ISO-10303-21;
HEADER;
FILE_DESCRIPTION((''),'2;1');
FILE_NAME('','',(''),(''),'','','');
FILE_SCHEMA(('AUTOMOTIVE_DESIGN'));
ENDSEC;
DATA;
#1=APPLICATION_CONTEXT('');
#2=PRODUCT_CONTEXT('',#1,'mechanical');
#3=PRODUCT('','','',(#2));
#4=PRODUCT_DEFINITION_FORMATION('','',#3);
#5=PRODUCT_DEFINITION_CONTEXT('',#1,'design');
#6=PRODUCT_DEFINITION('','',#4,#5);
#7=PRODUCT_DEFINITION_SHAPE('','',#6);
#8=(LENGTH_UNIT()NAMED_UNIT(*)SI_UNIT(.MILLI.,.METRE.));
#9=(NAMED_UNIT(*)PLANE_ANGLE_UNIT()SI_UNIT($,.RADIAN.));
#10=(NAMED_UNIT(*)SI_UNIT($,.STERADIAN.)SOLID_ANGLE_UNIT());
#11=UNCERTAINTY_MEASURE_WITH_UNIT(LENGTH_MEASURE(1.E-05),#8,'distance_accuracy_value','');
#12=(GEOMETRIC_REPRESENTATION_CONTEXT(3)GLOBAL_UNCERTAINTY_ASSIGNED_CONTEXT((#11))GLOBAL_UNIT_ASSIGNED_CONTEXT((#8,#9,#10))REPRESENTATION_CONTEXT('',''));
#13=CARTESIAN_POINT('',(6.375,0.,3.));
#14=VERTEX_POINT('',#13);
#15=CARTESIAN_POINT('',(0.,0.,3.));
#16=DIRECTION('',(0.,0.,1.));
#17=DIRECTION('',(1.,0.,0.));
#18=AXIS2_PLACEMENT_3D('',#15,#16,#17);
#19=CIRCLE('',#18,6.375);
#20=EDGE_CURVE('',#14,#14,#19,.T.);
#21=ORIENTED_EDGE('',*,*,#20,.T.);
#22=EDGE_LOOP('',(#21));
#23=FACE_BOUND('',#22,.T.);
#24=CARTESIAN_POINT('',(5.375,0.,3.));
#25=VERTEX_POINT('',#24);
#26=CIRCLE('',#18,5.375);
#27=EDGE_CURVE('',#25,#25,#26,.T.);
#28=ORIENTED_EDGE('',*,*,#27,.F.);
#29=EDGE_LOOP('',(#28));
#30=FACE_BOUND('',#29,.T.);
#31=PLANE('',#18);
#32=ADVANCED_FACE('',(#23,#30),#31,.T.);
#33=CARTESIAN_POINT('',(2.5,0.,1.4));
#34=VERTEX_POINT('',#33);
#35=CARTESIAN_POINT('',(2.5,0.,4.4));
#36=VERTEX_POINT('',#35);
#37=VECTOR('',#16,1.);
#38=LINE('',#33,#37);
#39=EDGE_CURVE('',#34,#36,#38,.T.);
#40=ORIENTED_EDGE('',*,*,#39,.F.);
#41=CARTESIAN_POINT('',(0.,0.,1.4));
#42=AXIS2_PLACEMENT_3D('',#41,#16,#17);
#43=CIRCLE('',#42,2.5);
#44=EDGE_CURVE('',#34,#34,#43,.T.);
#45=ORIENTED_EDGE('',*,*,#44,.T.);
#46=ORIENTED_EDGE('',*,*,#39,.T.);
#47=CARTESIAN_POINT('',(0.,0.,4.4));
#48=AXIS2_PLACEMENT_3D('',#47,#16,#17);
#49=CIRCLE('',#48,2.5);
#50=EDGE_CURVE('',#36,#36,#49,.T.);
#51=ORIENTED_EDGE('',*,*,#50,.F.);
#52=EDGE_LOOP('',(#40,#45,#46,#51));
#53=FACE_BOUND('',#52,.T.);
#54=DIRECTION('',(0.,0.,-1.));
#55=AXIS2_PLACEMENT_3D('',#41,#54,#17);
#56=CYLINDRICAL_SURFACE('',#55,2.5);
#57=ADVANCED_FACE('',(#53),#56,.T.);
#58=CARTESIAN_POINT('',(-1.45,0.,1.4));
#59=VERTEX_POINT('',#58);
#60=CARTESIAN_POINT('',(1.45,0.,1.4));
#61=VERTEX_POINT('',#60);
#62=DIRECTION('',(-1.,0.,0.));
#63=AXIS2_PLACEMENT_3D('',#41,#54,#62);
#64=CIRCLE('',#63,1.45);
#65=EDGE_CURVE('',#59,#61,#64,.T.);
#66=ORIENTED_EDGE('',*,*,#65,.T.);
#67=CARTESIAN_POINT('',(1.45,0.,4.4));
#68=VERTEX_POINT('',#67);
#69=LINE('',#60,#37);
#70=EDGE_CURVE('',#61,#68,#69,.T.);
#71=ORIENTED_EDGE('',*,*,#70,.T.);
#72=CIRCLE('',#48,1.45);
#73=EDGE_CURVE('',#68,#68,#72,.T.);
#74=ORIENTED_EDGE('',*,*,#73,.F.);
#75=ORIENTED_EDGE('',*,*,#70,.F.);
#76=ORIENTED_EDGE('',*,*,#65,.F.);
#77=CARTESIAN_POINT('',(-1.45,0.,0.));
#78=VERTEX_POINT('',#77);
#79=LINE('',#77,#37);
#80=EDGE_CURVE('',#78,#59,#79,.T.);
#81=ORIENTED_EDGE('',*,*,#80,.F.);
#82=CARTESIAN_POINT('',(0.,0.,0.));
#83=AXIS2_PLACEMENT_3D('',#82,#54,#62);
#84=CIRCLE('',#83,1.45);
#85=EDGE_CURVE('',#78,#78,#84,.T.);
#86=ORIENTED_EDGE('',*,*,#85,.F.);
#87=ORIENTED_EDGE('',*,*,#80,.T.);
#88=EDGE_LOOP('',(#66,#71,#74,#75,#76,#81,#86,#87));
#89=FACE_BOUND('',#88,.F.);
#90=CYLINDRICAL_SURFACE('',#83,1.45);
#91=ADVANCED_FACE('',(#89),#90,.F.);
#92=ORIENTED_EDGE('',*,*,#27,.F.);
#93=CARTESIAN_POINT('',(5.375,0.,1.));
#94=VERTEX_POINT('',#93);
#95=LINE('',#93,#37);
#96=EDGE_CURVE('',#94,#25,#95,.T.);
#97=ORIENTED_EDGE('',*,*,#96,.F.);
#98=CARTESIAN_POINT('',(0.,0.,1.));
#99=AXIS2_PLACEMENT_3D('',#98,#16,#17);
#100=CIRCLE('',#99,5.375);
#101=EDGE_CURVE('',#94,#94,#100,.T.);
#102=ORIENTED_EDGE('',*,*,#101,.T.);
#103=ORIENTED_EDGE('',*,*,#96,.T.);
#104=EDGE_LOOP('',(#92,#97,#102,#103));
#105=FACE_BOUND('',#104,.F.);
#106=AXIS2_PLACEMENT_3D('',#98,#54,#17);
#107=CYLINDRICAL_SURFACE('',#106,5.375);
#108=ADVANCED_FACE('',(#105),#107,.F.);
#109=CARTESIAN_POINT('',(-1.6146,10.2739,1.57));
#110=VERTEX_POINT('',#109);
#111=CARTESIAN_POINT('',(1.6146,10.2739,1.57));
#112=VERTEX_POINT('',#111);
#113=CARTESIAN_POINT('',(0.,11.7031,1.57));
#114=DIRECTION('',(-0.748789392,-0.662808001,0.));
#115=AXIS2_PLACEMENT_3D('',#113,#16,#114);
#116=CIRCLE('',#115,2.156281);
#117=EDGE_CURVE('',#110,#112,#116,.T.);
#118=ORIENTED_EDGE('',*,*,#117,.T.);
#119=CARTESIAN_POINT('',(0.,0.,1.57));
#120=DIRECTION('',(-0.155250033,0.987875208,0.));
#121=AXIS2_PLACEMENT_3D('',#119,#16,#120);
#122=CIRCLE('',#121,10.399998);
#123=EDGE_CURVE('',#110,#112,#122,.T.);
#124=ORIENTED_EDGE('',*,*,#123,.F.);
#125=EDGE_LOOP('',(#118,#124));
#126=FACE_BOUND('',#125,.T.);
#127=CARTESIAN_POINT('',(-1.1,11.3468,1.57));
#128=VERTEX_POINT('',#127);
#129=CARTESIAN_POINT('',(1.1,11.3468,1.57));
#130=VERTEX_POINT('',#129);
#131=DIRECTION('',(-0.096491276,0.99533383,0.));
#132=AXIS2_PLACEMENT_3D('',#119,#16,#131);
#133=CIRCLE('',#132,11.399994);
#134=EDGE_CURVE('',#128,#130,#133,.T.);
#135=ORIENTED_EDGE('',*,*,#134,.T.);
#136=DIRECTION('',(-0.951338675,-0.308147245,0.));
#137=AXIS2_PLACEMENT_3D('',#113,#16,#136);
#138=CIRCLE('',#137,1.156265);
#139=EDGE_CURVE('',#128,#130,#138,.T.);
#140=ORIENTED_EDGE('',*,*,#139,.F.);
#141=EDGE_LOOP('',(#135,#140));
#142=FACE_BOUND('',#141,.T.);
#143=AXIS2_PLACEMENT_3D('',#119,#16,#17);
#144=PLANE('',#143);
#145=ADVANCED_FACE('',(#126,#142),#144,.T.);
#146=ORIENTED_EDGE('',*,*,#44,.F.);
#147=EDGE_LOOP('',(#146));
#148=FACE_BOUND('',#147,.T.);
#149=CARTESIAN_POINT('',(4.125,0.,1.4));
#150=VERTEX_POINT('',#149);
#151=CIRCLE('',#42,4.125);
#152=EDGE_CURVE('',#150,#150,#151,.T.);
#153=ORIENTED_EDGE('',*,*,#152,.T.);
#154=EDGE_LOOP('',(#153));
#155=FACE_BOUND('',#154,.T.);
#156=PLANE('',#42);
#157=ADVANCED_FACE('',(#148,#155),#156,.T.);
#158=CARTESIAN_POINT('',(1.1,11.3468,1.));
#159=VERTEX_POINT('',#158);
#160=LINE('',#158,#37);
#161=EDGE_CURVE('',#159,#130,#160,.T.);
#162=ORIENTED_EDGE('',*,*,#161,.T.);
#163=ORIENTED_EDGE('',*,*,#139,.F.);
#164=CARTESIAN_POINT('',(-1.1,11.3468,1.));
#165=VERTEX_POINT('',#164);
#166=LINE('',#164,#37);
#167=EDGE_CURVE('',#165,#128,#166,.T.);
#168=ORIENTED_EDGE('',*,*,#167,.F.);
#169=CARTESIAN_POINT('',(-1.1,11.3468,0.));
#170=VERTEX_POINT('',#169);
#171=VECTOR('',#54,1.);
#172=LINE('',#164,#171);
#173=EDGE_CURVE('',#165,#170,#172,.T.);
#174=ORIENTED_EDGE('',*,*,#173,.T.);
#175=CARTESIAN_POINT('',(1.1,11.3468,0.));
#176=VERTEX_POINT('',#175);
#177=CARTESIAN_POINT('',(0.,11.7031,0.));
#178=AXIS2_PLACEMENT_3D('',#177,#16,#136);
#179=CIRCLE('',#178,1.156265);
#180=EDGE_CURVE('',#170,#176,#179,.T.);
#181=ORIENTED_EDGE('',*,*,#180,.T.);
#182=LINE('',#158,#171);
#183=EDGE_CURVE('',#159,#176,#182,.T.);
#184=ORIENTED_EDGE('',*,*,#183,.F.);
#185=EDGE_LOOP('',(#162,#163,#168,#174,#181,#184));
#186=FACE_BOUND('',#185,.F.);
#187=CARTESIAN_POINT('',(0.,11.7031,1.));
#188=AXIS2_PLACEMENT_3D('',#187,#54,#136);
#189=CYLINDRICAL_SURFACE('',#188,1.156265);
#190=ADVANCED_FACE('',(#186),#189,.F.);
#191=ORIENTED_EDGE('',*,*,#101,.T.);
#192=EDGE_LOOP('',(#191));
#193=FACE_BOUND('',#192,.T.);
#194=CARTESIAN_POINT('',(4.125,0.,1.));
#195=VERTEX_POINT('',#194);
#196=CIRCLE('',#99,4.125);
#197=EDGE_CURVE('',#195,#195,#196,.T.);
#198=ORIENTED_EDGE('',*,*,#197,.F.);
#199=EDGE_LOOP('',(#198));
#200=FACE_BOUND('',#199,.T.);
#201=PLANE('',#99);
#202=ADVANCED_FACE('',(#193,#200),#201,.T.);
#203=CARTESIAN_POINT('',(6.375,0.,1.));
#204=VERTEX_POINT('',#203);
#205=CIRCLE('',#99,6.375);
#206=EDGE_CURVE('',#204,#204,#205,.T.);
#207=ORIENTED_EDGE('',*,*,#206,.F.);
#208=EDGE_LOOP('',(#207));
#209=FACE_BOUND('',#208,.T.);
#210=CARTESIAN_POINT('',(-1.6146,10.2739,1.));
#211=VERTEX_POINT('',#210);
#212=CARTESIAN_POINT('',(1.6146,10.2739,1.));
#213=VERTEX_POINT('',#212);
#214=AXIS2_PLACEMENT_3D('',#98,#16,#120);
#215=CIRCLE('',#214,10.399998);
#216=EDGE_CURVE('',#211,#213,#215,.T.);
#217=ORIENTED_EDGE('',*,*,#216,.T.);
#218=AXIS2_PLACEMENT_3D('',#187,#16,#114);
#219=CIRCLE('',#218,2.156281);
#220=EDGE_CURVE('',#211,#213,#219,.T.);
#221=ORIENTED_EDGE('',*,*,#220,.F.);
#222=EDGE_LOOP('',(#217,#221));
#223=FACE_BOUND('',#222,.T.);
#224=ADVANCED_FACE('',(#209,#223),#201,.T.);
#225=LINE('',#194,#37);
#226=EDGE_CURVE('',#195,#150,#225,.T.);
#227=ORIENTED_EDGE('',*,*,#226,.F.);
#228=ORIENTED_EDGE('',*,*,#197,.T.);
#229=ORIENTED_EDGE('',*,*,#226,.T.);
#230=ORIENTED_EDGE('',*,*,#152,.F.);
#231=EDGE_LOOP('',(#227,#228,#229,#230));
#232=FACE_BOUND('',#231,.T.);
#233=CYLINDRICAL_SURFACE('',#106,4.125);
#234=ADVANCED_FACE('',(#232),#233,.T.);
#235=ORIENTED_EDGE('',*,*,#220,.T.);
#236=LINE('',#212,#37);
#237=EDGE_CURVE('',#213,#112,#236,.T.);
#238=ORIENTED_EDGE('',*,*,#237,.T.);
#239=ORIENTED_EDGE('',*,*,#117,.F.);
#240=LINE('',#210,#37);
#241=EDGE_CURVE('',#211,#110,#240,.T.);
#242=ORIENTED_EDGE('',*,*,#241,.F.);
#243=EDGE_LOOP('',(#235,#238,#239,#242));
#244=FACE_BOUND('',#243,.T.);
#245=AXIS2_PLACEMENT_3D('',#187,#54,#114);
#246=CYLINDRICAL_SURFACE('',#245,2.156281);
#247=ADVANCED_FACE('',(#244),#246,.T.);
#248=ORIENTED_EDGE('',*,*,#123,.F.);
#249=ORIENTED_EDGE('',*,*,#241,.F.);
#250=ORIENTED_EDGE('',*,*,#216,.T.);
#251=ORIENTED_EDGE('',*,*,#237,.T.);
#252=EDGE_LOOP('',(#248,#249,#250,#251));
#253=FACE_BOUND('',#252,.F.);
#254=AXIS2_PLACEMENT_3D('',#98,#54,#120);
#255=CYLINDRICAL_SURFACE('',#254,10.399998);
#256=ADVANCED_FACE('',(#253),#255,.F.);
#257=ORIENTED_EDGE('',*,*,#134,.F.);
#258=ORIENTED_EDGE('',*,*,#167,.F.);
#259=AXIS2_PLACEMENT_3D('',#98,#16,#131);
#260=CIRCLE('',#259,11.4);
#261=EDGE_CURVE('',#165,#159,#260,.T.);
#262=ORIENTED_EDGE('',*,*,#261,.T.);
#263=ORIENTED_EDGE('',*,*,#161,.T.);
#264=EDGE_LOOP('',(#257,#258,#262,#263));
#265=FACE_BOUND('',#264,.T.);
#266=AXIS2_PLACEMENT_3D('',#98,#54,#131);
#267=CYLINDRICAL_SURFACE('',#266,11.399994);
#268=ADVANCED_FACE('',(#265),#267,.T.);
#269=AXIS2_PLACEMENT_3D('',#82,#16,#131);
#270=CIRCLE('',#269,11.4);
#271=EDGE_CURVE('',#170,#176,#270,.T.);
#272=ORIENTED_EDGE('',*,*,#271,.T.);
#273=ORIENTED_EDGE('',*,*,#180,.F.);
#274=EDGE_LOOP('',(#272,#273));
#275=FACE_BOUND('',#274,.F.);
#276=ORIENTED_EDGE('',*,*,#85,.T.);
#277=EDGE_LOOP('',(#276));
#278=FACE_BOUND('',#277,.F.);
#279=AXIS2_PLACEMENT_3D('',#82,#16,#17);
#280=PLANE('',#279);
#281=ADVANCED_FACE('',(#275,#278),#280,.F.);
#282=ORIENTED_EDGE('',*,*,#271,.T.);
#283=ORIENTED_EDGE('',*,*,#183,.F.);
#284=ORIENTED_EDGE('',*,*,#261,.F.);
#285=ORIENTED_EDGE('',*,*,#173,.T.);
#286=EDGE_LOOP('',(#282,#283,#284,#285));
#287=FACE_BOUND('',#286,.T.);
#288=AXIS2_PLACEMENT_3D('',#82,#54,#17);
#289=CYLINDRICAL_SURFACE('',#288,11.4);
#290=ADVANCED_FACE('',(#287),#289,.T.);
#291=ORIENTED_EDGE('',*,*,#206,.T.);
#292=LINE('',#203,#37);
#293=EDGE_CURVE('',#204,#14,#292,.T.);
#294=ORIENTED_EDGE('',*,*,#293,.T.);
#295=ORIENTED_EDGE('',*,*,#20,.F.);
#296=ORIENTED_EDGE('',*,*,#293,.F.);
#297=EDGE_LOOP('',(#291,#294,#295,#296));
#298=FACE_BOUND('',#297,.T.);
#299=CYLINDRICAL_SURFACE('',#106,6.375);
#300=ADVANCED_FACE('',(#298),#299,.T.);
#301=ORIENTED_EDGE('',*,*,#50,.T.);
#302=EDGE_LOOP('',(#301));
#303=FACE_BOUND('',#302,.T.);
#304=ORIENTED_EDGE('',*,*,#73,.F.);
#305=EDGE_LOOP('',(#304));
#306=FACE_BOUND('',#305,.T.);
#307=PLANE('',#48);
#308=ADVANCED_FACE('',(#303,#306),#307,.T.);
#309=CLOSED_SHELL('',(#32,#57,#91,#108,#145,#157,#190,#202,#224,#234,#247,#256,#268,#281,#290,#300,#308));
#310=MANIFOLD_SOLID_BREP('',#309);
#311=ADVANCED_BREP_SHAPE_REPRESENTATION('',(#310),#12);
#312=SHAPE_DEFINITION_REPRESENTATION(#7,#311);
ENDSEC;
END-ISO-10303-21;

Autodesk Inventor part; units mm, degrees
ref_plane "YZ Plane" through (0, 0, 0) normal (1, 0, 0) x (0, 1, 0)
sketch "Sketch1" plane through (0, 0, 0) normal (0, 0, 1) x (1, 0, 0)
  circle A0 centre (0, 0) radius 11.4
  dimension "d0" = 22.8
extrude "Extrusion1" add sketch "Sketch1" along normal blind 1
ref_plane "Work Plane1" through (0, 0, 1) normal (0, 0, 1) x (1, 0, 0)
sketch "Sketch3" plane through (0, 0, 1) normal (0, 0, 1) x (1, 0, 0)
  circle A0 centre (0, 0) radius 6.375
  circle A1 centre (0, 0) radius 5.375
  dimension "d6" = 12.75
  dimension "d7" = 10.75
extrude "Extrusion3" add sketch "Sketch3" along normal blind 2
ref_plane "Work Plane2" through (0, 0, 1) normal (0, 0, 1) x (1, 0, 0)
sketch "Sketch5" plane through (0, 0, 1) normal (0, 0, 1) x (1, 0, 0)
  circle A0 centre (0, 0) radius 4.125
  dimension "d14" = 8.25
extrude "Extrusion5" add sketch "Sketch5" along normal blind 0.4
sketch "Sketch6" plane through (0, 0, 0) normal (0, 0, -1) x (-1, 0, 0)
  circle A0 centre (0, 0) radius 1.45
  dimension "d17" = 2.9
extrude "Extrusion6" cut sketch "Sketch6" against normal up to surface (1.4 mm away)
sketch "Sketch7" plane through (0, 0, 1.4) normal (0, 0, 1) x (1, 0, 0)
  circle A0 centre (0, 0) radius 1.45 projected
  circle A1 centre (0, 0) radius 1.45 projected
  circle A2 centre (0, 0) radius 2.5
  dimension "d20" = 5
extrude "Pressguide" add sketch "Sketch7" along normal blind 3
sketch "Sketch8" plane through (0, 0, 1) normal (0, 0, 1) x (1, 0, 0)
  circle A0 centre (0, 0) radius 11.4 projected
  line L0 (-1.1, 11.3468) -> (1.1, 11.3468) construction
  line L1 (0, 11.3468) -> (0, 10.5468) construction
  arc A1 (-1.1, 11.3468) -> (1.1, 11.3468) centre (0, 11.7031) ccw
  dimension "d23" = 2.2
  dimension "d24" = 0.8
extrude "Extrusion8" cut sketch "Sketch8" against normal up to surface (1 mm away) contours A1 A0 picked at (-0.044, 11.1142)
sketch "Sketch9" plane through (0, 0, 1) normal (0, 0, 1) x (1, 0, 0)
  arc A0 (-1.1, 11.3468) -> (1.1, 11.3468) centre (0, 0) ccw projected
  arc A1 (-1.1, 11.3468) -> (1.1, 11.3468) centre (0, 11.7031) ccw projected
  arc A2 (-1.6146, 10.2739) -> (1.6146, 10.2739) centre (0, 0) ccw
  arc A3 (-1.6146, 10.2739) -> (1.6146, 10.2739) centre (0, 11.7031) ccw
  dimension "d27" = 1
extrude "Extrusion9" add sketch "Sketch9" along normal blind 0.57
sketch "Sketch10" plane through (0, 0, 0) normal (0, 0, -1) x (-1, 0, 0)
  circle A0 centre (0, 0) radius 1.45 projected
extrude "Axle" [suppressed]
properties part number "PMSealNoAxle"
